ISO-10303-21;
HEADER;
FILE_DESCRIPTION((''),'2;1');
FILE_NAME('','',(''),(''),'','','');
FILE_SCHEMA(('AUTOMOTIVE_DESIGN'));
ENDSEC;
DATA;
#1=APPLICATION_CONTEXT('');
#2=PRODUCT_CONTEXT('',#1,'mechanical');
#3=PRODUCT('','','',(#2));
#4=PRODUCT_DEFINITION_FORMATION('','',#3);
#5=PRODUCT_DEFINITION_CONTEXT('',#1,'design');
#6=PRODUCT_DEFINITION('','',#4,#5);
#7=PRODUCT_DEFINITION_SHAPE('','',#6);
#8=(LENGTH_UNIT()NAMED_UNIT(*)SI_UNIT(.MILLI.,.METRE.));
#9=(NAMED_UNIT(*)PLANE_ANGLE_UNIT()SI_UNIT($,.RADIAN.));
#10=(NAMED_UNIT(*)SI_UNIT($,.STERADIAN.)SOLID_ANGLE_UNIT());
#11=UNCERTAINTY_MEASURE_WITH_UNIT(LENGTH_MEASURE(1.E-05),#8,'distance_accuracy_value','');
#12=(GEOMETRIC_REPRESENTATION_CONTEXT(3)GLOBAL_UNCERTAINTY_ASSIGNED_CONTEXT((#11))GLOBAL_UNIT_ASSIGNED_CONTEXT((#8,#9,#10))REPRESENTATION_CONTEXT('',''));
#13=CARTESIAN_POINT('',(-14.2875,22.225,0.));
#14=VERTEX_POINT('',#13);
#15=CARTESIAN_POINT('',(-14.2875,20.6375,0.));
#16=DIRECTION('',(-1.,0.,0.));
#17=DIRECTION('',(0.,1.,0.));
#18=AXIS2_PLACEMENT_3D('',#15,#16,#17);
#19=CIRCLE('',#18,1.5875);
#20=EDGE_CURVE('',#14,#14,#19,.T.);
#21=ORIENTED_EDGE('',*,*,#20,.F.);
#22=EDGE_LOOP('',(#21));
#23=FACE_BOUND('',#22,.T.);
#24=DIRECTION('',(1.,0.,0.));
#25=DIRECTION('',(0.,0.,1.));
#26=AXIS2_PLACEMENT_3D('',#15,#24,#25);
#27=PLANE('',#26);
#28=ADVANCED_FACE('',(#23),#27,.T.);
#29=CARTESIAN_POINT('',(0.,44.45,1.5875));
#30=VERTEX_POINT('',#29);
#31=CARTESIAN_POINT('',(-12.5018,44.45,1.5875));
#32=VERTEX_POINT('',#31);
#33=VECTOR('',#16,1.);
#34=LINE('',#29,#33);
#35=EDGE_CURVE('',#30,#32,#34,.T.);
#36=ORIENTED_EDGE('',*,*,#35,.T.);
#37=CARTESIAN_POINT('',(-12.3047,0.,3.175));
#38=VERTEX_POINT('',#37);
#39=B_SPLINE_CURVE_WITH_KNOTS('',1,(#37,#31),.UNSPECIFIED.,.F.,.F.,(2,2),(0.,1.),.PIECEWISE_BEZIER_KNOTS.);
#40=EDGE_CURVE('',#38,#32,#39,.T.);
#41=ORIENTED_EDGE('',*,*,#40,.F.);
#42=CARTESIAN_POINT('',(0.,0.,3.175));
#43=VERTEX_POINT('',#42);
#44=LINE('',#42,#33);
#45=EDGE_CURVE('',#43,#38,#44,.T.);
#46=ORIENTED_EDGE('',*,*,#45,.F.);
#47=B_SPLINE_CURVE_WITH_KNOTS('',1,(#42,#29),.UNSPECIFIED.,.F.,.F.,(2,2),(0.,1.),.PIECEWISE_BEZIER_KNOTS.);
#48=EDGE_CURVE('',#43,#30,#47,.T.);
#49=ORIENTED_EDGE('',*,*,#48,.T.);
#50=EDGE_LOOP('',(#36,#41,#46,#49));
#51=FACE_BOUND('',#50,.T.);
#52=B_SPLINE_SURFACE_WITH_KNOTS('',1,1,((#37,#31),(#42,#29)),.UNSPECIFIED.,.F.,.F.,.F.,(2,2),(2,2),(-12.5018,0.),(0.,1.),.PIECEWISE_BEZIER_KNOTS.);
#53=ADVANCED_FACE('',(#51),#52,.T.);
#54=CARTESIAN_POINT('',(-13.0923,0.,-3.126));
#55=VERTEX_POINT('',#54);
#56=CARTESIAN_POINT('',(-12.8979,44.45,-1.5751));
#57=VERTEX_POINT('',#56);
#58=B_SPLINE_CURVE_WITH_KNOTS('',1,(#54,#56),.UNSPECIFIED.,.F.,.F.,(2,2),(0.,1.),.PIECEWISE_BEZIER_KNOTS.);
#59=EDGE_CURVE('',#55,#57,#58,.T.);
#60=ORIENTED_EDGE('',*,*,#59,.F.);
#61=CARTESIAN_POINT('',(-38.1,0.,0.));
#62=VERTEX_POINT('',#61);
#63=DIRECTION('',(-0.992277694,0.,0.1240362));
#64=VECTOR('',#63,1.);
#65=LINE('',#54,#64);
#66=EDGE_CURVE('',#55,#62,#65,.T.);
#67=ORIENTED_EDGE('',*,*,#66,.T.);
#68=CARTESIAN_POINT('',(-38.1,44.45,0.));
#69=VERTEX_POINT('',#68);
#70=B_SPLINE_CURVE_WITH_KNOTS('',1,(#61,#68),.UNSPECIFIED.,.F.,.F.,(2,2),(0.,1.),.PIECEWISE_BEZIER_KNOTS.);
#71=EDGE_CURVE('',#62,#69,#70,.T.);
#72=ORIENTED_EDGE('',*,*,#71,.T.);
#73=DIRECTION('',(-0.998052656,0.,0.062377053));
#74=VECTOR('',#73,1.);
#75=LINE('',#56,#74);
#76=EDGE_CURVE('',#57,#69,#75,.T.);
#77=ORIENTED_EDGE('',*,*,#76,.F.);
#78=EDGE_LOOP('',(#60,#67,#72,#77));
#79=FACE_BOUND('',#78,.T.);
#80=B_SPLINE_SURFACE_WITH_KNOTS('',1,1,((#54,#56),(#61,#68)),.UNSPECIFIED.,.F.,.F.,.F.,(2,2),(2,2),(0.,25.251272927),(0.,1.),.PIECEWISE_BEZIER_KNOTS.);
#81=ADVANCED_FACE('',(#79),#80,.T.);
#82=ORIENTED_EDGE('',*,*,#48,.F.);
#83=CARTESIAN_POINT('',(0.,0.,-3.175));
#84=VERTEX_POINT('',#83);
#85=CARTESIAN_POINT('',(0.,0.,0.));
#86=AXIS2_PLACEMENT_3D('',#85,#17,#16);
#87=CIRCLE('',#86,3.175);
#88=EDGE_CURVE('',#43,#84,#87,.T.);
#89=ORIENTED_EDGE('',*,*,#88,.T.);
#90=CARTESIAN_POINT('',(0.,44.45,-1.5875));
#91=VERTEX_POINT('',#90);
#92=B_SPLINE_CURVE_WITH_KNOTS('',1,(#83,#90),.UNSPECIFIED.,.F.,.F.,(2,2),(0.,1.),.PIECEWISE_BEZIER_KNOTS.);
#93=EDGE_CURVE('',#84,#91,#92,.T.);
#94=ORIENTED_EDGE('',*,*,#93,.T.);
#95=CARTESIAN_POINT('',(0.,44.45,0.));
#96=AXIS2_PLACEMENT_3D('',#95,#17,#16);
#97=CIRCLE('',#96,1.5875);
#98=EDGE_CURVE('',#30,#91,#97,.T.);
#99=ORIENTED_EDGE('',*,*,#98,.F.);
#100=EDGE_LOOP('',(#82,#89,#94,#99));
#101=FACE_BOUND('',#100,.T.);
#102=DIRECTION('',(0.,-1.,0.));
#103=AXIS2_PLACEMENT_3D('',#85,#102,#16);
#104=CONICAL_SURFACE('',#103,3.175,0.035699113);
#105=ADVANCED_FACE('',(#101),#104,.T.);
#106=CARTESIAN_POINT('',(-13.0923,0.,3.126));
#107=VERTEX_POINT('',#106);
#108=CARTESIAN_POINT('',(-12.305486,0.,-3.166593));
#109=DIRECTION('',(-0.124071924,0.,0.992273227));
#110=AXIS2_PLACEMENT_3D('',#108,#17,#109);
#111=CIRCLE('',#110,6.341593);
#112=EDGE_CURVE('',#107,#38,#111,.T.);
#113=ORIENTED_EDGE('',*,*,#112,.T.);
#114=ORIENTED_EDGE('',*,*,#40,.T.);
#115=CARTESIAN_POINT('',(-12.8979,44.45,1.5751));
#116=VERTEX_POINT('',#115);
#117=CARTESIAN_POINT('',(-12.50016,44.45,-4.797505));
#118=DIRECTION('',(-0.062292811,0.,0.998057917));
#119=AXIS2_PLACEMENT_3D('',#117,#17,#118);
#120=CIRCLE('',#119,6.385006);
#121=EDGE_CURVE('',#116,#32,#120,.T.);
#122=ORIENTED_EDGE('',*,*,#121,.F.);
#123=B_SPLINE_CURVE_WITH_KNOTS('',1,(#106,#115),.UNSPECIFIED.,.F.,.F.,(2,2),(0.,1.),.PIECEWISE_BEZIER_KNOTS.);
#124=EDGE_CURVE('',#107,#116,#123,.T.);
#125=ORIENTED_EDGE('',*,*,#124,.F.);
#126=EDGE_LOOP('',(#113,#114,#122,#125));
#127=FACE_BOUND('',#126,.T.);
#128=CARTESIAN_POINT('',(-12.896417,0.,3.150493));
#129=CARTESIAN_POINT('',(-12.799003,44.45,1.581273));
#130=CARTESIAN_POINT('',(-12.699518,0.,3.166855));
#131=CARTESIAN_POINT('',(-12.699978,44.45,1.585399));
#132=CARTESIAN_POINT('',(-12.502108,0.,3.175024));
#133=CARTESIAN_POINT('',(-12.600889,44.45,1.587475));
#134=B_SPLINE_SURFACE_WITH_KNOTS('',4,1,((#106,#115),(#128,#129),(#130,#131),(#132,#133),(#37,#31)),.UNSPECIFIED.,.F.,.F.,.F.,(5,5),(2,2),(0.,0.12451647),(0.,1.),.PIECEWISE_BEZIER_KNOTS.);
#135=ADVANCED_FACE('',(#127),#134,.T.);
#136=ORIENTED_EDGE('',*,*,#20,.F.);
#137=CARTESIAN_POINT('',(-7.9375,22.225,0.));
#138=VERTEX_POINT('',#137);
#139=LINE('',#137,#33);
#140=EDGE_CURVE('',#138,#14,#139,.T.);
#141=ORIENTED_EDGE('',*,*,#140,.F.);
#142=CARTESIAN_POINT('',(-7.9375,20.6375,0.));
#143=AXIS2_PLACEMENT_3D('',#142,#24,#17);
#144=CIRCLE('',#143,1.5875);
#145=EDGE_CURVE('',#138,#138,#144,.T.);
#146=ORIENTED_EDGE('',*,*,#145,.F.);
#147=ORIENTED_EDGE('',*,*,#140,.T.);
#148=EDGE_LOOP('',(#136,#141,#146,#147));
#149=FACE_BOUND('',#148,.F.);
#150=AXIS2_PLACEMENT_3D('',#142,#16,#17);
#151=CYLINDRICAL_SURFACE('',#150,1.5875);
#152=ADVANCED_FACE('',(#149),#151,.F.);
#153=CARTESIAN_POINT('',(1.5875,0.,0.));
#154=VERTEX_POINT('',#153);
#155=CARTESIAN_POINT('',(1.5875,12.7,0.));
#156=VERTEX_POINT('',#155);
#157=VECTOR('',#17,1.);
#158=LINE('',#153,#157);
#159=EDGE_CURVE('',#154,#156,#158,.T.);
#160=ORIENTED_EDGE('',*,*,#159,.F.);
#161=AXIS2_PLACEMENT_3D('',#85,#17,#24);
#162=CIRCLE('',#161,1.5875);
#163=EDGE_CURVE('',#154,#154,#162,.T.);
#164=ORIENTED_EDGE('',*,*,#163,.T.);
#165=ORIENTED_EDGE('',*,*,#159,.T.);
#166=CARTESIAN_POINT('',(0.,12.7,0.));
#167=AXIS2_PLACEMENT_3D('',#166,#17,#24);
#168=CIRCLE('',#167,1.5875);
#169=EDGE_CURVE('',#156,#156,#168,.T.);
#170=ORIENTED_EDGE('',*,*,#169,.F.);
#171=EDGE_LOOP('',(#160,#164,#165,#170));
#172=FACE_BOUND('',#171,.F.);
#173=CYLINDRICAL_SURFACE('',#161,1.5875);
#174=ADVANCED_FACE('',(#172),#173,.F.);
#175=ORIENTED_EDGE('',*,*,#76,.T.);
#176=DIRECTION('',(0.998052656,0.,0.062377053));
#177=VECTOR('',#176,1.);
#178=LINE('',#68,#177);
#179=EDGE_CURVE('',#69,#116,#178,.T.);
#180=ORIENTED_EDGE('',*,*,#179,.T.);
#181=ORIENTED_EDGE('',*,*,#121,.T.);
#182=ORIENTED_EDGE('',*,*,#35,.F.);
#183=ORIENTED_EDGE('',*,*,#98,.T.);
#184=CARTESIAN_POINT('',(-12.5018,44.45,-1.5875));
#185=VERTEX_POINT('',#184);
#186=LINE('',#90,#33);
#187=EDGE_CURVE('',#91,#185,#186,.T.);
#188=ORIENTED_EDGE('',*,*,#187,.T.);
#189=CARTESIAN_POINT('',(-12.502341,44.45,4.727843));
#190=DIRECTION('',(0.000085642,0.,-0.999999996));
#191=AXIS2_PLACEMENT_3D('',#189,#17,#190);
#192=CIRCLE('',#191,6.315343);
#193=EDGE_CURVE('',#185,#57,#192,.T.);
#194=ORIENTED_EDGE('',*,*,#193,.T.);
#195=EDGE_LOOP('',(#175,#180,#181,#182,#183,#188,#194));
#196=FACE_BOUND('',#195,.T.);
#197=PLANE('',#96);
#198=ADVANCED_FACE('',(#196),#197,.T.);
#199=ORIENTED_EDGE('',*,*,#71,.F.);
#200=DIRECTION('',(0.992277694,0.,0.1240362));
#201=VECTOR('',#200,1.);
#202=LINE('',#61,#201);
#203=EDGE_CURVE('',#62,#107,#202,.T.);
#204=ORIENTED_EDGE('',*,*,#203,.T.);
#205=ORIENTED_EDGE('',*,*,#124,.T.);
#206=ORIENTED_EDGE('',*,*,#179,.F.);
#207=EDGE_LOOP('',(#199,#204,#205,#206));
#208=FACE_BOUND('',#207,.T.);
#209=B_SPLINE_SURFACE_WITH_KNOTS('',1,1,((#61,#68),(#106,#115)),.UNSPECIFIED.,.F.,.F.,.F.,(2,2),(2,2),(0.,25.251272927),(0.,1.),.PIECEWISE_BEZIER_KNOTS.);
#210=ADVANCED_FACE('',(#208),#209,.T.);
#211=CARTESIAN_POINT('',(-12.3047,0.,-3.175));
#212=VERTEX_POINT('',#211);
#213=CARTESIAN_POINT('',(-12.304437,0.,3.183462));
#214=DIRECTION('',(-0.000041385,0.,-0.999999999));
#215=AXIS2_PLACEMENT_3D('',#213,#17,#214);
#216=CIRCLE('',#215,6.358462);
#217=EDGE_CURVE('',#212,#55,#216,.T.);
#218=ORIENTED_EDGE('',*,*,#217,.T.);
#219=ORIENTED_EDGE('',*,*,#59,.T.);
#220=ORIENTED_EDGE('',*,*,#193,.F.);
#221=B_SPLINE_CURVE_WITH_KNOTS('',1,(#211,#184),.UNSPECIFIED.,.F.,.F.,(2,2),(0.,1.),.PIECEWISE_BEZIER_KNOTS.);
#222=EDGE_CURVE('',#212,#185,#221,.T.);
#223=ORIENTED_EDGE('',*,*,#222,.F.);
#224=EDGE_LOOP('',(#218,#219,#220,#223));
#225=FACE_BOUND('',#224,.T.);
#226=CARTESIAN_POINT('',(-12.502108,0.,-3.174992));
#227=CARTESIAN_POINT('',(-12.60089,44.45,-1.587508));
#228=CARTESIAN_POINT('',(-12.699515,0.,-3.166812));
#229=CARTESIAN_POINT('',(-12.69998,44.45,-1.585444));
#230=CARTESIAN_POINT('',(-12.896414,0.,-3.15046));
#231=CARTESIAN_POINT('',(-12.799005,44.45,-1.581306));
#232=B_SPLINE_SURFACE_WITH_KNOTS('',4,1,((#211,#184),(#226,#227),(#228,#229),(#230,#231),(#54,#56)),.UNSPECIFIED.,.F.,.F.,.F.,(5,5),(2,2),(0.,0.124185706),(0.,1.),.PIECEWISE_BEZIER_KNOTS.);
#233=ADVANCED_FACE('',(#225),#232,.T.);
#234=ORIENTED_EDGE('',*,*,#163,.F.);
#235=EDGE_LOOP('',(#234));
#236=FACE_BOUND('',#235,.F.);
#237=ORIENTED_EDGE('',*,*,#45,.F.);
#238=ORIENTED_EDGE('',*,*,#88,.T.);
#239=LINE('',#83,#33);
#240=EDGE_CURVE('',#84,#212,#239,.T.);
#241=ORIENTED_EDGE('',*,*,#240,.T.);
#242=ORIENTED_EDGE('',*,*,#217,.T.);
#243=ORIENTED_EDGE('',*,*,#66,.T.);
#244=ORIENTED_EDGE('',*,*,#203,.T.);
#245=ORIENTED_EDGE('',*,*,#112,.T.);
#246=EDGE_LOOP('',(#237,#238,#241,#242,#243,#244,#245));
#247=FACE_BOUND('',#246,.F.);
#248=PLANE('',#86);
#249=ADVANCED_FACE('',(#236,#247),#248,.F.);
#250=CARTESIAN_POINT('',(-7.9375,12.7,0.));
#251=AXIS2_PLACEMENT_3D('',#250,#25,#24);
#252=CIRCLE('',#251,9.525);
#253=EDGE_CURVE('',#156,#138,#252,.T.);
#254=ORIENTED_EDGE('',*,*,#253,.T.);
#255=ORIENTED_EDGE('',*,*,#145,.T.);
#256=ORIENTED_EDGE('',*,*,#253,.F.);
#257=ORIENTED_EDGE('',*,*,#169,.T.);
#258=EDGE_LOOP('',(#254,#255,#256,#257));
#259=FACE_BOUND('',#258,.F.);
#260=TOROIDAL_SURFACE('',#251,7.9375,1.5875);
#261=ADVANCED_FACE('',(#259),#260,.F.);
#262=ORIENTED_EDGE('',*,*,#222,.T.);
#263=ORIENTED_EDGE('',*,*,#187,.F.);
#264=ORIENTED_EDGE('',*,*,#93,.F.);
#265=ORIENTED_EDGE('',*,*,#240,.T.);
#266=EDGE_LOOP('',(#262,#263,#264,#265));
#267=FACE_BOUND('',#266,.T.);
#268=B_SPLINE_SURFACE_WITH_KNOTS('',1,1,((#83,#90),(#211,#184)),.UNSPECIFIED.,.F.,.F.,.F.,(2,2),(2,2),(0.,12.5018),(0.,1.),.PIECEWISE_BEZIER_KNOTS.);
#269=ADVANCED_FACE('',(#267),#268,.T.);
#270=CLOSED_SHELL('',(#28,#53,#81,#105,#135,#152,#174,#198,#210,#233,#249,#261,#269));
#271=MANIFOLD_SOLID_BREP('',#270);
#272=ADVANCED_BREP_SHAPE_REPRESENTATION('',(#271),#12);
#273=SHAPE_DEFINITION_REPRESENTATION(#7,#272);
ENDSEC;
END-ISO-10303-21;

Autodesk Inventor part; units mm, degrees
ref_plane "YZ Plane" through (0, 0, 0) normal (1, 0, 0) x (0, 1, 0)
ref_plane "XY Plane" through (0, 0, 0) normal (0, 0, 1) x (1, 0, 0)
sketch "Sketch2" plane through (0, 0, 0) normal (0, 1, 0) x (-1, 0, 0)
  circle A0 centre (0, 0) radius 3.175
  line L0 (0, 0) -> (38.1, 0)
  line L1 (0, 3.175) -> (12.3047, 3.175)
  line L2 (0, -3.175) -> (12.3047, -3.175)
  line L3 (13.0923, -3.126) -> (38.1, 0)
  line L4 (38.1, 0) -> (13.0923, 3.126)
  arc A1 (13.0923, 3.126) -> (12.3047, 3.175) centre (12.3047, -3.175) ccw
  arc A2 (12.3047, -3.175) -> (13.0923, -3.126) centre (12.3047, 3.175) ccw
  circle A3 centre (0, 0) radius 1.5875
  point P0 (12.7, 3.175)
  dimension "d5" = 6.35
  dimension "d6" = 38.1
  dimension "d7" = 12.7
  dimension "d8" = 6.35
  dimension "d9" = 6.35
  dimension "d12" = 3.175
ref_plane "Work Plane1" through (0, 44.45, 0) normal (0, 1, 0) x (-1, 0, 0)
sketch "Sketch3" plane through (0, 44.45, 0) normal (0, 1, 0) x (-1, 0, 0)
  circle A0 centre (0, 0) radius 1.5875
  line L0 (0, 1.5875) -> (12.5018, 1.5875)
  line L1 (0, -1.5875) -> (12.5018, -1.5875)
  line L2 (12.8979, -1.5751) -> (38.1, 0)
  line L3 (38.1, 0) -> (12.8979, 1.5751)
  arc A1 (12.8979, 1.5751) -> (12.5018, 1.5875) centre (12.5018, -4.7625) ccw
  arc A2 (12.5018, -1.5875) -> (12.8979, -1.5751) centre (12.5018, 4.7625) ccw
  point P0 (12.7, 1.5875)
  dimension "d14" = 3.175
  dimension "d15" = 12.7
  dimension "d16" = 6.35
  dimension "d17" = 6.35
loft "Loft1" add profiles "Sketch2", "Sketch3" contours A0 | L0 L3 A2 L2 A0 | A0 L1 A1 L4 L0 | A3 / all
sketch "Sketch4" plane through (0, 0, 0) normal (0, 0, 1) x (1, 0, 0)
  line L0 (-12.3047, 0) -> (0, 0) projected
  line L1 (0, 0) -> (0, 12.7)
  line L2 (0, 0) -> (0, 44.45) projected
  line L3 (0, 12.7) -> (-7.9375, 12.7)
  line L4 (-7.9375, 12.7) -> (-7.9375, 20.6375)
  arc A0 (0, 12.7) -> (-7.9375, 20.6375) centre (-7.9375, 12.7) ccw
  line L5 (-7.9375, 20.6375) -> (-14.2875, 20.6375)
  dimension "d22" = 12.7
  dimension "d23" = 7.9375
  dimension "d24" = 7.9375
  dimension "d25" = 6.35
sketch "Sketch5" plane through (-12.3047, 0, -3.175) normal (0, -1, 0) x (1, 0, 0)
  circle A0 centre (12.3047, 3.175) radius 1.5875
  dimension "d26" = 3.175
sweep "Sweep1" cut profiles "Sketch5" path "Sketch4" path curves L1 A0 L5
properties part number "GenericControlSurface"
